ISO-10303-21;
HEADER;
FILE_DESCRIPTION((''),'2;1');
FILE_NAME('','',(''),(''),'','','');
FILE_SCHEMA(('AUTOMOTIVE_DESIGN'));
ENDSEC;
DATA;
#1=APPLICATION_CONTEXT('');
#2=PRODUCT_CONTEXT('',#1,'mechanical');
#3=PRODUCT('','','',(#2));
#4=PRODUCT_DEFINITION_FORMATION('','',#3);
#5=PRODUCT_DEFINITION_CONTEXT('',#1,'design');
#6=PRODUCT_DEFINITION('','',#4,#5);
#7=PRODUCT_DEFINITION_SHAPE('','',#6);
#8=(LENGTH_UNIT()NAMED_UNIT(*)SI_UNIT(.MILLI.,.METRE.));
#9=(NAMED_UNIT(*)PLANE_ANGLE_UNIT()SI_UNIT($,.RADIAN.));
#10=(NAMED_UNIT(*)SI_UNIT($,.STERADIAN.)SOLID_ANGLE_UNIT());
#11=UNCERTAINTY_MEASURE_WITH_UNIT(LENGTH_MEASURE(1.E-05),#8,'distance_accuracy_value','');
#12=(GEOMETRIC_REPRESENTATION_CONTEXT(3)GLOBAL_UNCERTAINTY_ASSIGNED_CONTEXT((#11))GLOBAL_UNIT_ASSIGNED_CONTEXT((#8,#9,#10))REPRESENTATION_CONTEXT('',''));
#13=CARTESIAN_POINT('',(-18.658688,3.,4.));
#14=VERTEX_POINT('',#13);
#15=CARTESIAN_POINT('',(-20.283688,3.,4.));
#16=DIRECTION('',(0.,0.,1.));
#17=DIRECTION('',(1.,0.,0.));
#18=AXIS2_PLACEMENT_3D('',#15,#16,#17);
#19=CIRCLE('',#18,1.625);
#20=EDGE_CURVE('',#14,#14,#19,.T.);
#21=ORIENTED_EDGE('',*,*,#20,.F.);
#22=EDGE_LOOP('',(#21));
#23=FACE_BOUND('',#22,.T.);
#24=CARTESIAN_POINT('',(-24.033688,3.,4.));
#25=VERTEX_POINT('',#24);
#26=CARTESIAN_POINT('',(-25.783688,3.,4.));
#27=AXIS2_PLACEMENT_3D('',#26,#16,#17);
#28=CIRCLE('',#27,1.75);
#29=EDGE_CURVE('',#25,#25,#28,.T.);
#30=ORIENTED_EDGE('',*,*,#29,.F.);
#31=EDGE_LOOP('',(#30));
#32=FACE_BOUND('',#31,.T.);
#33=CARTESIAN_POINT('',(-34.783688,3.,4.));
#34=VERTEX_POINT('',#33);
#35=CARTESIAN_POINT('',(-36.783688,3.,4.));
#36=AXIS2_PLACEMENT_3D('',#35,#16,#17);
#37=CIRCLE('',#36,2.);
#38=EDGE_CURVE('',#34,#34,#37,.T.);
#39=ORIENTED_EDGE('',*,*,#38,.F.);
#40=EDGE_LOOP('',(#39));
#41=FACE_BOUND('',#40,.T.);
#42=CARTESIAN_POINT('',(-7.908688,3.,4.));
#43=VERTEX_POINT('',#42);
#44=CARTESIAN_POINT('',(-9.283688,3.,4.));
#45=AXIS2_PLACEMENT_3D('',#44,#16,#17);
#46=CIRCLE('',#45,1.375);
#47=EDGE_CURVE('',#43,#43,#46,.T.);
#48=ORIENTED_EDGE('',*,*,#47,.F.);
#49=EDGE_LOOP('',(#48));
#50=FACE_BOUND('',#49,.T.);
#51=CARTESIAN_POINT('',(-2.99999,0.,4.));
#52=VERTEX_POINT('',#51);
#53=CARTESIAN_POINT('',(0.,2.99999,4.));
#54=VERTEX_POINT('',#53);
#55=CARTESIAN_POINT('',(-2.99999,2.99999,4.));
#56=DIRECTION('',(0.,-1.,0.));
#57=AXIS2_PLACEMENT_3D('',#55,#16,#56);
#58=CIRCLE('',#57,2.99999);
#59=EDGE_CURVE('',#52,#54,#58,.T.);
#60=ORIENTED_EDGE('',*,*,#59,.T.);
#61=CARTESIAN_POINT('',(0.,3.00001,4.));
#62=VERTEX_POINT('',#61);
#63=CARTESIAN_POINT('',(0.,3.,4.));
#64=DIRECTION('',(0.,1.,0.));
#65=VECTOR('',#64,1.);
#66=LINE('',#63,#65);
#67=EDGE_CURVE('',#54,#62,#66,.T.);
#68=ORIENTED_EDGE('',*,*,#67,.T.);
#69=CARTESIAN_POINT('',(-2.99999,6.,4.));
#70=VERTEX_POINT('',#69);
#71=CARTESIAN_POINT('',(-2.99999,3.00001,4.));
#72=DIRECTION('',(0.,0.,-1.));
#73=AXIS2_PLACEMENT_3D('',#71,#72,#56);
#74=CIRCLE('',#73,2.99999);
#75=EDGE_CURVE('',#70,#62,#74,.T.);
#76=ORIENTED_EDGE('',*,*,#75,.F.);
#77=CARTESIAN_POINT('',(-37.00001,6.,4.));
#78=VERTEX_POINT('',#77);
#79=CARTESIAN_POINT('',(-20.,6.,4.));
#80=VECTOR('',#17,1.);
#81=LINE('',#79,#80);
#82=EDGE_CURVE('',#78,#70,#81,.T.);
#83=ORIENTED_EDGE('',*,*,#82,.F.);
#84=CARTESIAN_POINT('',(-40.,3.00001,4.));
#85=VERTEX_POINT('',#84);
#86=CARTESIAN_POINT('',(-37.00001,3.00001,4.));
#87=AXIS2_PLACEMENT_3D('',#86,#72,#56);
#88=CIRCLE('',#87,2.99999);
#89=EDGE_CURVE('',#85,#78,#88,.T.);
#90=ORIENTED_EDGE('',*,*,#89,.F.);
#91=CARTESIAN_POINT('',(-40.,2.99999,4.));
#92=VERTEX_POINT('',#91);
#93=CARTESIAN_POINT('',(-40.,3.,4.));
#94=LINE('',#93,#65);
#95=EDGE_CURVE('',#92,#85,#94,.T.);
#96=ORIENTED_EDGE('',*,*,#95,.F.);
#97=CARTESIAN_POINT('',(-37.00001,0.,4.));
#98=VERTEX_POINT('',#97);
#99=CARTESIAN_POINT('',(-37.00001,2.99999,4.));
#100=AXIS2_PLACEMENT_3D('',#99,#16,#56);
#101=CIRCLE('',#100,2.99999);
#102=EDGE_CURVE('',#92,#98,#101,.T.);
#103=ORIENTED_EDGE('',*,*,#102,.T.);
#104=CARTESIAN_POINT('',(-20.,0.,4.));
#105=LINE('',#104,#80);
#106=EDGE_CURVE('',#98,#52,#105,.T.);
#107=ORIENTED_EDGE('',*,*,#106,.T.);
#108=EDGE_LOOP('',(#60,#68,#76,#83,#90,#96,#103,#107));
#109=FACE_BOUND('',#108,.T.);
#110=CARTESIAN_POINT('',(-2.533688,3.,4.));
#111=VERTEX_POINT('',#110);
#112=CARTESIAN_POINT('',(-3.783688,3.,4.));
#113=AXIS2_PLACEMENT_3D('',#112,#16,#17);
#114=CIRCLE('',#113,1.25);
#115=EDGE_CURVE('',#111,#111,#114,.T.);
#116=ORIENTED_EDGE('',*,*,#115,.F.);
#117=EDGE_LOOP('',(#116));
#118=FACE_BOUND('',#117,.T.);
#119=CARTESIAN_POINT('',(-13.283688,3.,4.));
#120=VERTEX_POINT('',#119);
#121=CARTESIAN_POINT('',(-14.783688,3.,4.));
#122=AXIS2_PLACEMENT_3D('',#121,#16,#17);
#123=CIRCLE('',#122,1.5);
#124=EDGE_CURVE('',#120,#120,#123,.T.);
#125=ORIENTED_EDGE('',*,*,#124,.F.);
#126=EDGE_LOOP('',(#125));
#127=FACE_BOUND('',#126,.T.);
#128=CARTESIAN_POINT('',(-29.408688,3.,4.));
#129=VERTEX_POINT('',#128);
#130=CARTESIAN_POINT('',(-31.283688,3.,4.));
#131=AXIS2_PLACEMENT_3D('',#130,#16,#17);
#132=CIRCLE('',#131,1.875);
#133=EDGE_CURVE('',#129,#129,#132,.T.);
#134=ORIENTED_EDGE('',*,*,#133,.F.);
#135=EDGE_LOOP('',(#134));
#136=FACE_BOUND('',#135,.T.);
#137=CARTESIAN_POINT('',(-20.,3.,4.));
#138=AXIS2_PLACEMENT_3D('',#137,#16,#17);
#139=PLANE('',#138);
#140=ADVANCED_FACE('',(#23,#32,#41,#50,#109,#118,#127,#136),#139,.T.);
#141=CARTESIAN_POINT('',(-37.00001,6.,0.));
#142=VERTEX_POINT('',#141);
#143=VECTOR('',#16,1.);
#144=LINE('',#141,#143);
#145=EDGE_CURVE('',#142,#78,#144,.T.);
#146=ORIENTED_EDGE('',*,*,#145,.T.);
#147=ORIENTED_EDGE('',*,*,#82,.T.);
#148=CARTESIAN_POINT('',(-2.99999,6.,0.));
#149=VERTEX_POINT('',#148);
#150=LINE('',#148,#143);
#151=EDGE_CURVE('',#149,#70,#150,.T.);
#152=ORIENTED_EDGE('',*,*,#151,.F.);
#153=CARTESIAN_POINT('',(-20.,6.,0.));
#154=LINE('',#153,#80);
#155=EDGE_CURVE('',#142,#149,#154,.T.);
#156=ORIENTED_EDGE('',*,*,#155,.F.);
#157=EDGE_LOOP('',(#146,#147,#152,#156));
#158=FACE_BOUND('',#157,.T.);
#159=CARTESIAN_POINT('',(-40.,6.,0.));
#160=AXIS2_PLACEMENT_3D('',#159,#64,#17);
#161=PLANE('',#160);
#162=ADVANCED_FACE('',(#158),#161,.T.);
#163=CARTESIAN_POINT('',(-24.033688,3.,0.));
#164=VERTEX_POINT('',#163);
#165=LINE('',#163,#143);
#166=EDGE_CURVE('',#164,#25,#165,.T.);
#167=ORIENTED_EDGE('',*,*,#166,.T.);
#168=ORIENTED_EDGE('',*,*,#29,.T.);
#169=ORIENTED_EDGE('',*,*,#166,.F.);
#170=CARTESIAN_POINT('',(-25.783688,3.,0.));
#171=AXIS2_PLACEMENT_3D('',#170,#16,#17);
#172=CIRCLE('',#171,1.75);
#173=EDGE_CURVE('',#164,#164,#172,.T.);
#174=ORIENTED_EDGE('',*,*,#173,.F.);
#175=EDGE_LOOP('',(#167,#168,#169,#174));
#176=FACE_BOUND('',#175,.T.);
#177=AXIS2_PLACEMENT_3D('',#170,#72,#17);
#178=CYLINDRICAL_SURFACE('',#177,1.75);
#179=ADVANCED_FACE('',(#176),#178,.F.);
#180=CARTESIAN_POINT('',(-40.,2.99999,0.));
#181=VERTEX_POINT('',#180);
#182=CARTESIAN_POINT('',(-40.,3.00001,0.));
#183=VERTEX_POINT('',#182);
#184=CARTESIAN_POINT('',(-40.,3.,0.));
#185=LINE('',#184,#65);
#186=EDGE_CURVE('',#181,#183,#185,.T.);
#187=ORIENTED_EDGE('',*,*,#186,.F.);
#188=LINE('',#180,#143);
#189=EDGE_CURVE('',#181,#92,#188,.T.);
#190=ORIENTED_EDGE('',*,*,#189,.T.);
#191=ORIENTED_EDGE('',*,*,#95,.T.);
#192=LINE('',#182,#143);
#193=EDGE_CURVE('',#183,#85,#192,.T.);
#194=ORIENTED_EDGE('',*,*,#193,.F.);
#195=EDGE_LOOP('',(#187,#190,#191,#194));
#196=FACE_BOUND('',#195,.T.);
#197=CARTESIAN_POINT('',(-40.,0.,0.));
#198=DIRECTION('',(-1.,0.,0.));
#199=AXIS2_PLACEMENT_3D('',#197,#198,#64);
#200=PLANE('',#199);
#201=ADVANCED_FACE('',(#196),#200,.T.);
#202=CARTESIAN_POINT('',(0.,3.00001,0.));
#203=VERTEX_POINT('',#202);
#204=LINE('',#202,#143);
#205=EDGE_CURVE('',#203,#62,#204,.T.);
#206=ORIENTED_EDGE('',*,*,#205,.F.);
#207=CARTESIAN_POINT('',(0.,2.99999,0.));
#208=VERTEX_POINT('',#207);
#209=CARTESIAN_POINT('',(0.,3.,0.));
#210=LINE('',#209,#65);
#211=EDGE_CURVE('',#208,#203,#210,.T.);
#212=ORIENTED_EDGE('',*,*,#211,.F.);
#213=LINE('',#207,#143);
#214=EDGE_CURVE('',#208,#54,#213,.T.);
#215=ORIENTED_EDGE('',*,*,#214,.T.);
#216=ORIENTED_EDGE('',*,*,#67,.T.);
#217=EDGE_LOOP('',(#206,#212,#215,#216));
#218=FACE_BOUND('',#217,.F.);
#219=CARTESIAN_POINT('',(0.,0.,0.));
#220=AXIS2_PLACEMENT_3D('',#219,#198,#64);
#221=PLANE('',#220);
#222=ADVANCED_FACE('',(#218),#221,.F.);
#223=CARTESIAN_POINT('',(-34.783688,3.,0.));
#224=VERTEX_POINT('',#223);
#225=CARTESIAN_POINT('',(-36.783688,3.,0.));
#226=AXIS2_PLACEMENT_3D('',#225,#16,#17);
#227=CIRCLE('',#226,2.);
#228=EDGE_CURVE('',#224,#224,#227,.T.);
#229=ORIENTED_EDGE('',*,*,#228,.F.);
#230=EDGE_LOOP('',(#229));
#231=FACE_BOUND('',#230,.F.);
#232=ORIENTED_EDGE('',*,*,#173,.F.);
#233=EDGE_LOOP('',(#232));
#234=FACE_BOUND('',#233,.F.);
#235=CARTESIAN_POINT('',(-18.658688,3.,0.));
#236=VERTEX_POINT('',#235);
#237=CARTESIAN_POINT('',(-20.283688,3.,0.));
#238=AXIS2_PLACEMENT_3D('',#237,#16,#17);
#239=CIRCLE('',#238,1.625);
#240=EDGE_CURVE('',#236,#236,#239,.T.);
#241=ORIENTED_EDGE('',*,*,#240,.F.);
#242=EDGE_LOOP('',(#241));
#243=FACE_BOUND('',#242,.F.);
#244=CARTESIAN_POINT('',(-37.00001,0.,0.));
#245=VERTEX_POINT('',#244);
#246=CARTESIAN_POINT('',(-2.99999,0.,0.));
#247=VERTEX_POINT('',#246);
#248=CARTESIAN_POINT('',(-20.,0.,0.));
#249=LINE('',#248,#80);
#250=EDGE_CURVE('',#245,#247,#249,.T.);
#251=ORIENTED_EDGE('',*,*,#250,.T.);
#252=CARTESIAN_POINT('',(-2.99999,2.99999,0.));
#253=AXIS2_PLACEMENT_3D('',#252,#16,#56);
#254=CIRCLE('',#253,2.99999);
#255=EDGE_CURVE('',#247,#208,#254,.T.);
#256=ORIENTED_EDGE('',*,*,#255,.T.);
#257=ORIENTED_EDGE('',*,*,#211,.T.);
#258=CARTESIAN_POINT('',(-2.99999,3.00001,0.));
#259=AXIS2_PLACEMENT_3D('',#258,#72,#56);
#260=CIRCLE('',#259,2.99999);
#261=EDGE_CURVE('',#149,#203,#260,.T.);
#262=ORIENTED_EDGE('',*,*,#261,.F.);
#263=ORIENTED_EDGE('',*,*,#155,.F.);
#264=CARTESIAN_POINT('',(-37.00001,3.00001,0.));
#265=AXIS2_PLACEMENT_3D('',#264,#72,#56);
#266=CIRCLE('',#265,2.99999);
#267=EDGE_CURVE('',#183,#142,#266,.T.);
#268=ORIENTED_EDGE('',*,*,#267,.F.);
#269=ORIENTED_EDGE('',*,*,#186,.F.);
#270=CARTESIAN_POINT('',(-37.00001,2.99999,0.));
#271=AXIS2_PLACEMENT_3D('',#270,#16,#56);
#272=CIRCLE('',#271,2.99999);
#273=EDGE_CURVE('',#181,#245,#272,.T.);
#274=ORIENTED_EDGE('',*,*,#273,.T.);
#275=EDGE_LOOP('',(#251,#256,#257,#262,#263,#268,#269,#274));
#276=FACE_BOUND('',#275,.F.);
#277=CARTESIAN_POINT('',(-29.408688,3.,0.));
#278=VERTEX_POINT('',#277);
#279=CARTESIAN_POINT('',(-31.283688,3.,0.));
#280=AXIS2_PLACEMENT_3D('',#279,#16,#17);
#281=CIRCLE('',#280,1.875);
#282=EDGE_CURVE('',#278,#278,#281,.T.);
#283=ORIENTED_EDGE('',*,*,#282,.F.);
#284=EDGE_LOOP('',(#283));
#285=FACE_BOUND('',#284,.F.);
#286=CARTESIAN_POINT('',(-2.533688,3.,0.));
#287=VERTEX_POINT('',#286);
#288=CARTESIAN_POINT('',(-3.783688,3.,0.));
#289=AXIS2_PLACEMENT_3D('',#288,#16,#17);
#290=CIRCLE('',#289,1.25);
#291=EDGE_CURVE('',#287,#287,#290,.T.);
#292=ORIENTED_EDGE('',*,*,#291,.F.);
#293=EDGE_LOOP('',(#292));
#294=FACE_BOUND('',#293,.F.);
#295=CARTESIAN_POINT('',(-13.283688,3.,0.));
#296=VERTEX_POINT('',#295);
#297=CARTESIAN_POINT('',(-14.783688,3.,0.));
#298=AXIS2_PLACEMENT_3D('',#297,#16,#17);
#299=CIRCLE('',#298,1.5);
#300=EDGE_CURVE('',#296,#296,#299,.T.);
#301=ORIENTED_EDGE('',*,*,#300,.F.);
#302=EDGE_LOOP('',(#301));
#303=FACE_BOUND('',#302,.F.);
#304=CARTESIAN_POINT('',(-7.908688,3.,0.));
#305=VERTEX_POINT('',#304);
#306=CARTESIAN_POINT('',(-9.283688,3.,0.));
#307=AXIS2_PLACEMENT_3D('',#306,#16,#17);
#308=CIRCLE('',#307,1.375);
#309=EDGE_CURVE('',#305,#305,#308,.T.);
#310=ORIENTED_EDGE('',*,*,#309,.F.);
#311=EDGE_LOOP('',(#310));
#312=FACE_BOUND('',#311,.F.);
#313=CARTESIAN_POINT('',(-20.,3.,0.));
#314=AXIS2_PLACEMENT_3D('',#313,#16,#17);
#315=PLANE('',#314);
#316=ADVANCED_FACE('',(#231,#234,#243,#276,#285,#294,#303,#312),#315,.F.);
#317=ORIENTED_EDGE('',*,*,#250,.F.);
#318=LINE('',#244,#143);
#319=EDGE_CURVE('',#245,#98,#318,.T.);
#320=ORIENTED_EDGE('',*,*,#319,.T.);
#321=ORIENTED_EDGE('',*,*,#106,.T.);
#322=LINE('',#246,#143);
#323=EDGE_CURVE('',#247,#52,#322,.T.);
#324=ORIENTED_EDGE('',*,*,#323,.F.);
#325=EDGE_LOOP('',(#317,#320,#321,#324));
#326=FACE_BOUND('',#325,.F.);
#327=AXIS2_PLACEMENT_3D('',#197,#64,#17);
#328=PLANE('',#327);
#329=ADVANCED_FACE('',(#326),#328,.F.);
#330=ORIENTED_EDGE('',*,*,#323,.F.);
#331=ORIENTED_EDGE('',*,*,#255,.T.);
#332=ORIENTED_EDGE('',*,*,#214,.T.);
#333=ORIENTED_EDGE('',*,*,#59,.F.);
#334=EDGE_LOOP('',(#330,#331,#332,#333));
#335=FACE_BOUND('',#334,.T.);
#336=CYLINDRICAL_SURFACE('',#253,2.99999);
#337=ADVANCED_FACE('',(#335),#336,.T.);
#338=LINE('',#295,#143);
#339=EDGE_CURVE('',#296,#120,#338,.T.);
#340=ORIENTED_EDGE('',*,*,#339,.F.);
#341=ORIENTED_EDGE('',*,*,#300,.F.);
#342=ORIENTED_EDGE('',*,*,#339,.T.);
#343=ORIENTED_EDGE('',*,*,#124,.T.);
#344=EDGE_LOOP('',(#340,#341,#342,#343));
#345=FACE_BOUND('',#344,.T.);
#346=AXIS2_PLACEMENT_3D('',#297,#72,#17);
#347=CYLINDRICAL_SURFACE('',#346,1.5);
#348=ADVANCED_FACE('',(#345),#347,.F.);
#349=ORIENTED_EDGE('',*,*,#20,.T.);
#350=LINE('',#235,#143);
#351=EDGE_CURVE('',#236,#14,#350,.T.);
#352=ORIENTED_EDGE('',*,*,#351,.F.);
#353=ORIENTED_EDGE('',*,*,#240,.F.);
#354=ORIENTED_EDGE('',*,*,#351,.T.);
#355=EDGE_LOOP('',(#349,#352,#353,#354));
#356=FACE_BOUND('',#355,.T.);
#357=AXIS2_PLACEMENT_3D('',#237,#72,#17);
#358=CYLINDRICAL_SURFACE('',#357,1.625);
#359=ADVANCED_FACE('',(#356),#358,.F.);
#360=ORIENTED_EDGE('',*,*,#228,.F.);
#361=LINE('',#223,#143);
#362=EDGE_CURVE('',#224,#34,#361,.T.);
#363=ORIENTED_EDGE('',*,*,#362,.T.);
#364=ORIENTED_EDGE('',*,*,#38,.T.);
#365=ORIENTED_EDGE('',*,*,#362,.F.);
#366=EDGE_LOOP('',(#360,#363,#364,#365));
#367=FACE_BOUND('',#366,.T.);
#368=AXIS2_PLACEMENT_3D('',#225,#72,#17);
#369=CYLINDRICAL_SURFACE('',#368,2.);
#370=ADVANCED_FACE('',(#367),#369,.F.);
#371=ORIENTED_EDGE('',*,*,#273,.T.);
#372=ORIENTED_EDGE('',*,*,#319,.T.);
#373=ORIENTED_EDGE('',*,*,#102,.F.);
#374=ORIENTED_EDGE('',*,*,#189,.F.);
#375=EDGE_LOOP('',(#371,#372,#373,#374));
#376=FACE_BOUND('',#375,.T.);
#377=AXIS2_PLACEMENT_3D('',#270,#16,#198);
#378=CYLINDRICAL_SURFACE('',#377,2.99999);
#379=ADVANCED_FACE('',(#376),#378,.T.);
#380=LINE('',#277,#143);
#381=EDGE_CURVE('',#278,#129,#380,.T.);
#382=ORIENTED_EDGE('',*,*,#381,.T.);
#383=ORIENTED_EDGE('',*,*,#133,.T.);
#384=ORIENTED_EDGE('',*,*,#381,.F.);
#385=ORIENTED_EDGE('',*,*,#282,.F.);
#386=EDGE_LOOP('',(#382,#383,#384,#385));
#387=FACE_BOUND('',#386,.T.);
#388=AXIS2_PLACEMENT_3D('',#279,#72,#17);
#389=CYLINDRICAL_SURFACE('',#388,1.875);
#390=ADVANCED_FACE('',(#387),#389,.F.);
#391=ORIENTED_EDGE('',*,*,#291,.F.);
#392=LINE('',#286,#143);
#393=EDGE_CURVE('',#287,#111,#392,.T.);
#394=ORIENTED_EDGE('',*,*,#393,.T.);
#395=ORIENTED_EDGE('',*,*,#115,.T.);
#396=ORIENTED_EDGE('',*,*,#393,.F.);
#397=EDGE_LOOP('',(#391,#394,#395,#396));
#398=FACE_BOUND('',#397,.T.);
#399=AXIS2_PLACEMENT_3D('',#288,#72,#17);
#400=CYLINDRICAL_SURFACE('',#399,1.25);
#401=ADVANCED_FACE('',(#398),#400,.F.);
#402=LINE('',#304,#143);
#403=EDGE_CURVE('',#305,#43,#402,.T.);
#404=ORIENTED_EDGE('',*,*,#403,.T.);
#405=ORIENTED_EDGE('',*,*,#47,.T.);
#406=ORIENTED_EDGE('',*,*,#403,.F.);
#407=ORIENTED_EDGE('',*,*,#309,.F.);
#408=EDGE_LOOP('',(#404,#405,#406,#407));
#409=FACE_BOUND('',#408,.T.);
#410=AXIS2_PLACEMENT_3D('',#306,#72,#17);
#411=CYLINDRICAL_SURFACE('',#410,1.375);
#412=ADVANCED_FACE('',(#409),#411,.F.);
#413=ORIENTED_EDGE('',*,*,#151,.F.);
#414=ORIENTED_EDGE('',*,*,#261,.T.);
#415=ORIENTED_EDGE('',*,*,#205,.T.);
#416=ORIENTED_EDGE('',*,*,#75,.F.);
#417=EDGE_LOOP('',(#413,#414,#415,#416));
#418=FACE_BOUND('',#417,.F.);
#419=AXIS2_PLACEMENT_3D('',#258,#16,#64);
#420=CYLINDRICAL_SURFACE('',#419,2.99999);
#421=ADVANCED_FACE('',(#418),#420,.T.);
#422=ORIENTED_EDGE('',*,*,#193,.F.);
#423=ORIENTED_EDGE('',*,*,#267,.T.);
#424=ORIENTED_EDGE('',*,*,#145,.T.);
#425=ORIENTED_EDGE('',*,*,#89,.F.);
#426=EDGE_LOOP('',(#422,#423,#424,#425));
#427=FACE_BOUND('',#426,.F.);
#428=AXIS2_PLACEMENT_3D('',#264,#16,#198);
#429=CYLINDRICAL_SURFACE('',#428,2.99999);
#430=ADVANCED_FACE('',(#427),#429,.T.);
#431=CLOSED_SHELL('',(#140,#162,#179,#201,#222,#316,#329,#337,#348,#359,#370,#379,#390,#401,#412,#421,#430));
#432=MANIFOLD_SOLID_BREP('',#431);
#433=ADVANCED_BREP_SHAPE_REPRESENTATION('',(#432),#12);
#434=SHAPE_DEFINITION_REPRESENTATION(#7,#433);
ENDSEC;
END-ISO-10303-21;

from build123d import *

# Parameters (mm, degrees)
F0_W     = 40
F0_H     = 6
F0_R     = 2
F0_R_2   = 1.875
F0_R_3   = 1.75
F0_R_4   = 1.625
F0_R_5   = 1.5
F0_R_6   = 1.375
F0_R_7   = 1.25
F1_DEPTH = 4
F2_R     = 2.99999


# Not quite as in the source:
# - a fillet or chamfer is up to 0.001 mm smaller than in the source, because OpenCascade refuses the exact size


with BuildPart() as f1:
    # F0 (on Top) → F1 (new body)
    with BuildSketch(Plane.XY):
        with Locations((-20, 3)):
            Rectangle(F0_W, F0_H)
        with Locations((-36.7836877704, 3)):
            Circle(F0_R, mode=Mode.SUBTRACT)
        with Locations((-31.2836877704, 3)):
            Circle(F0_R_2, mode=Mode.SUBTRACT)
        with Locations((-25.7836877704, 3)):
            Circle(F0_R_3, mode=Mode.SUBTRACT)
        with Locations((-20.2836877704, 3)):
            Circle(F0_R_4, mode=Mode.SUBTRACT)
        with Locations((-14.7836877704, 3)):
            Circle(F0_R_5, mode=Mode.SUBTRACT)
        with Locations((-9.2836877704, 3)):
            Circle(F0_R_6, mode=Mode.SUBTRACT)
        with Locations((-3.7836877704, 3)):
            Circle(F0_R_7, mode=Mode.SUBTRACT)
    extrude(amount=F1_DEPTH)

    # F2 (radius 3 in the source; OpenCascade refuses exactly that, so slightly less here)
    f2_edges = [f1.edges().sort_by_distance(p)[0] for p in [
        (0, 0, 2),
        (0, 6, 2),
        (-40, 0, 2),
        (-40, 6, 2),
    ]]
    fillet(f2_edges, radius=F2_R)


solid = f1.part
